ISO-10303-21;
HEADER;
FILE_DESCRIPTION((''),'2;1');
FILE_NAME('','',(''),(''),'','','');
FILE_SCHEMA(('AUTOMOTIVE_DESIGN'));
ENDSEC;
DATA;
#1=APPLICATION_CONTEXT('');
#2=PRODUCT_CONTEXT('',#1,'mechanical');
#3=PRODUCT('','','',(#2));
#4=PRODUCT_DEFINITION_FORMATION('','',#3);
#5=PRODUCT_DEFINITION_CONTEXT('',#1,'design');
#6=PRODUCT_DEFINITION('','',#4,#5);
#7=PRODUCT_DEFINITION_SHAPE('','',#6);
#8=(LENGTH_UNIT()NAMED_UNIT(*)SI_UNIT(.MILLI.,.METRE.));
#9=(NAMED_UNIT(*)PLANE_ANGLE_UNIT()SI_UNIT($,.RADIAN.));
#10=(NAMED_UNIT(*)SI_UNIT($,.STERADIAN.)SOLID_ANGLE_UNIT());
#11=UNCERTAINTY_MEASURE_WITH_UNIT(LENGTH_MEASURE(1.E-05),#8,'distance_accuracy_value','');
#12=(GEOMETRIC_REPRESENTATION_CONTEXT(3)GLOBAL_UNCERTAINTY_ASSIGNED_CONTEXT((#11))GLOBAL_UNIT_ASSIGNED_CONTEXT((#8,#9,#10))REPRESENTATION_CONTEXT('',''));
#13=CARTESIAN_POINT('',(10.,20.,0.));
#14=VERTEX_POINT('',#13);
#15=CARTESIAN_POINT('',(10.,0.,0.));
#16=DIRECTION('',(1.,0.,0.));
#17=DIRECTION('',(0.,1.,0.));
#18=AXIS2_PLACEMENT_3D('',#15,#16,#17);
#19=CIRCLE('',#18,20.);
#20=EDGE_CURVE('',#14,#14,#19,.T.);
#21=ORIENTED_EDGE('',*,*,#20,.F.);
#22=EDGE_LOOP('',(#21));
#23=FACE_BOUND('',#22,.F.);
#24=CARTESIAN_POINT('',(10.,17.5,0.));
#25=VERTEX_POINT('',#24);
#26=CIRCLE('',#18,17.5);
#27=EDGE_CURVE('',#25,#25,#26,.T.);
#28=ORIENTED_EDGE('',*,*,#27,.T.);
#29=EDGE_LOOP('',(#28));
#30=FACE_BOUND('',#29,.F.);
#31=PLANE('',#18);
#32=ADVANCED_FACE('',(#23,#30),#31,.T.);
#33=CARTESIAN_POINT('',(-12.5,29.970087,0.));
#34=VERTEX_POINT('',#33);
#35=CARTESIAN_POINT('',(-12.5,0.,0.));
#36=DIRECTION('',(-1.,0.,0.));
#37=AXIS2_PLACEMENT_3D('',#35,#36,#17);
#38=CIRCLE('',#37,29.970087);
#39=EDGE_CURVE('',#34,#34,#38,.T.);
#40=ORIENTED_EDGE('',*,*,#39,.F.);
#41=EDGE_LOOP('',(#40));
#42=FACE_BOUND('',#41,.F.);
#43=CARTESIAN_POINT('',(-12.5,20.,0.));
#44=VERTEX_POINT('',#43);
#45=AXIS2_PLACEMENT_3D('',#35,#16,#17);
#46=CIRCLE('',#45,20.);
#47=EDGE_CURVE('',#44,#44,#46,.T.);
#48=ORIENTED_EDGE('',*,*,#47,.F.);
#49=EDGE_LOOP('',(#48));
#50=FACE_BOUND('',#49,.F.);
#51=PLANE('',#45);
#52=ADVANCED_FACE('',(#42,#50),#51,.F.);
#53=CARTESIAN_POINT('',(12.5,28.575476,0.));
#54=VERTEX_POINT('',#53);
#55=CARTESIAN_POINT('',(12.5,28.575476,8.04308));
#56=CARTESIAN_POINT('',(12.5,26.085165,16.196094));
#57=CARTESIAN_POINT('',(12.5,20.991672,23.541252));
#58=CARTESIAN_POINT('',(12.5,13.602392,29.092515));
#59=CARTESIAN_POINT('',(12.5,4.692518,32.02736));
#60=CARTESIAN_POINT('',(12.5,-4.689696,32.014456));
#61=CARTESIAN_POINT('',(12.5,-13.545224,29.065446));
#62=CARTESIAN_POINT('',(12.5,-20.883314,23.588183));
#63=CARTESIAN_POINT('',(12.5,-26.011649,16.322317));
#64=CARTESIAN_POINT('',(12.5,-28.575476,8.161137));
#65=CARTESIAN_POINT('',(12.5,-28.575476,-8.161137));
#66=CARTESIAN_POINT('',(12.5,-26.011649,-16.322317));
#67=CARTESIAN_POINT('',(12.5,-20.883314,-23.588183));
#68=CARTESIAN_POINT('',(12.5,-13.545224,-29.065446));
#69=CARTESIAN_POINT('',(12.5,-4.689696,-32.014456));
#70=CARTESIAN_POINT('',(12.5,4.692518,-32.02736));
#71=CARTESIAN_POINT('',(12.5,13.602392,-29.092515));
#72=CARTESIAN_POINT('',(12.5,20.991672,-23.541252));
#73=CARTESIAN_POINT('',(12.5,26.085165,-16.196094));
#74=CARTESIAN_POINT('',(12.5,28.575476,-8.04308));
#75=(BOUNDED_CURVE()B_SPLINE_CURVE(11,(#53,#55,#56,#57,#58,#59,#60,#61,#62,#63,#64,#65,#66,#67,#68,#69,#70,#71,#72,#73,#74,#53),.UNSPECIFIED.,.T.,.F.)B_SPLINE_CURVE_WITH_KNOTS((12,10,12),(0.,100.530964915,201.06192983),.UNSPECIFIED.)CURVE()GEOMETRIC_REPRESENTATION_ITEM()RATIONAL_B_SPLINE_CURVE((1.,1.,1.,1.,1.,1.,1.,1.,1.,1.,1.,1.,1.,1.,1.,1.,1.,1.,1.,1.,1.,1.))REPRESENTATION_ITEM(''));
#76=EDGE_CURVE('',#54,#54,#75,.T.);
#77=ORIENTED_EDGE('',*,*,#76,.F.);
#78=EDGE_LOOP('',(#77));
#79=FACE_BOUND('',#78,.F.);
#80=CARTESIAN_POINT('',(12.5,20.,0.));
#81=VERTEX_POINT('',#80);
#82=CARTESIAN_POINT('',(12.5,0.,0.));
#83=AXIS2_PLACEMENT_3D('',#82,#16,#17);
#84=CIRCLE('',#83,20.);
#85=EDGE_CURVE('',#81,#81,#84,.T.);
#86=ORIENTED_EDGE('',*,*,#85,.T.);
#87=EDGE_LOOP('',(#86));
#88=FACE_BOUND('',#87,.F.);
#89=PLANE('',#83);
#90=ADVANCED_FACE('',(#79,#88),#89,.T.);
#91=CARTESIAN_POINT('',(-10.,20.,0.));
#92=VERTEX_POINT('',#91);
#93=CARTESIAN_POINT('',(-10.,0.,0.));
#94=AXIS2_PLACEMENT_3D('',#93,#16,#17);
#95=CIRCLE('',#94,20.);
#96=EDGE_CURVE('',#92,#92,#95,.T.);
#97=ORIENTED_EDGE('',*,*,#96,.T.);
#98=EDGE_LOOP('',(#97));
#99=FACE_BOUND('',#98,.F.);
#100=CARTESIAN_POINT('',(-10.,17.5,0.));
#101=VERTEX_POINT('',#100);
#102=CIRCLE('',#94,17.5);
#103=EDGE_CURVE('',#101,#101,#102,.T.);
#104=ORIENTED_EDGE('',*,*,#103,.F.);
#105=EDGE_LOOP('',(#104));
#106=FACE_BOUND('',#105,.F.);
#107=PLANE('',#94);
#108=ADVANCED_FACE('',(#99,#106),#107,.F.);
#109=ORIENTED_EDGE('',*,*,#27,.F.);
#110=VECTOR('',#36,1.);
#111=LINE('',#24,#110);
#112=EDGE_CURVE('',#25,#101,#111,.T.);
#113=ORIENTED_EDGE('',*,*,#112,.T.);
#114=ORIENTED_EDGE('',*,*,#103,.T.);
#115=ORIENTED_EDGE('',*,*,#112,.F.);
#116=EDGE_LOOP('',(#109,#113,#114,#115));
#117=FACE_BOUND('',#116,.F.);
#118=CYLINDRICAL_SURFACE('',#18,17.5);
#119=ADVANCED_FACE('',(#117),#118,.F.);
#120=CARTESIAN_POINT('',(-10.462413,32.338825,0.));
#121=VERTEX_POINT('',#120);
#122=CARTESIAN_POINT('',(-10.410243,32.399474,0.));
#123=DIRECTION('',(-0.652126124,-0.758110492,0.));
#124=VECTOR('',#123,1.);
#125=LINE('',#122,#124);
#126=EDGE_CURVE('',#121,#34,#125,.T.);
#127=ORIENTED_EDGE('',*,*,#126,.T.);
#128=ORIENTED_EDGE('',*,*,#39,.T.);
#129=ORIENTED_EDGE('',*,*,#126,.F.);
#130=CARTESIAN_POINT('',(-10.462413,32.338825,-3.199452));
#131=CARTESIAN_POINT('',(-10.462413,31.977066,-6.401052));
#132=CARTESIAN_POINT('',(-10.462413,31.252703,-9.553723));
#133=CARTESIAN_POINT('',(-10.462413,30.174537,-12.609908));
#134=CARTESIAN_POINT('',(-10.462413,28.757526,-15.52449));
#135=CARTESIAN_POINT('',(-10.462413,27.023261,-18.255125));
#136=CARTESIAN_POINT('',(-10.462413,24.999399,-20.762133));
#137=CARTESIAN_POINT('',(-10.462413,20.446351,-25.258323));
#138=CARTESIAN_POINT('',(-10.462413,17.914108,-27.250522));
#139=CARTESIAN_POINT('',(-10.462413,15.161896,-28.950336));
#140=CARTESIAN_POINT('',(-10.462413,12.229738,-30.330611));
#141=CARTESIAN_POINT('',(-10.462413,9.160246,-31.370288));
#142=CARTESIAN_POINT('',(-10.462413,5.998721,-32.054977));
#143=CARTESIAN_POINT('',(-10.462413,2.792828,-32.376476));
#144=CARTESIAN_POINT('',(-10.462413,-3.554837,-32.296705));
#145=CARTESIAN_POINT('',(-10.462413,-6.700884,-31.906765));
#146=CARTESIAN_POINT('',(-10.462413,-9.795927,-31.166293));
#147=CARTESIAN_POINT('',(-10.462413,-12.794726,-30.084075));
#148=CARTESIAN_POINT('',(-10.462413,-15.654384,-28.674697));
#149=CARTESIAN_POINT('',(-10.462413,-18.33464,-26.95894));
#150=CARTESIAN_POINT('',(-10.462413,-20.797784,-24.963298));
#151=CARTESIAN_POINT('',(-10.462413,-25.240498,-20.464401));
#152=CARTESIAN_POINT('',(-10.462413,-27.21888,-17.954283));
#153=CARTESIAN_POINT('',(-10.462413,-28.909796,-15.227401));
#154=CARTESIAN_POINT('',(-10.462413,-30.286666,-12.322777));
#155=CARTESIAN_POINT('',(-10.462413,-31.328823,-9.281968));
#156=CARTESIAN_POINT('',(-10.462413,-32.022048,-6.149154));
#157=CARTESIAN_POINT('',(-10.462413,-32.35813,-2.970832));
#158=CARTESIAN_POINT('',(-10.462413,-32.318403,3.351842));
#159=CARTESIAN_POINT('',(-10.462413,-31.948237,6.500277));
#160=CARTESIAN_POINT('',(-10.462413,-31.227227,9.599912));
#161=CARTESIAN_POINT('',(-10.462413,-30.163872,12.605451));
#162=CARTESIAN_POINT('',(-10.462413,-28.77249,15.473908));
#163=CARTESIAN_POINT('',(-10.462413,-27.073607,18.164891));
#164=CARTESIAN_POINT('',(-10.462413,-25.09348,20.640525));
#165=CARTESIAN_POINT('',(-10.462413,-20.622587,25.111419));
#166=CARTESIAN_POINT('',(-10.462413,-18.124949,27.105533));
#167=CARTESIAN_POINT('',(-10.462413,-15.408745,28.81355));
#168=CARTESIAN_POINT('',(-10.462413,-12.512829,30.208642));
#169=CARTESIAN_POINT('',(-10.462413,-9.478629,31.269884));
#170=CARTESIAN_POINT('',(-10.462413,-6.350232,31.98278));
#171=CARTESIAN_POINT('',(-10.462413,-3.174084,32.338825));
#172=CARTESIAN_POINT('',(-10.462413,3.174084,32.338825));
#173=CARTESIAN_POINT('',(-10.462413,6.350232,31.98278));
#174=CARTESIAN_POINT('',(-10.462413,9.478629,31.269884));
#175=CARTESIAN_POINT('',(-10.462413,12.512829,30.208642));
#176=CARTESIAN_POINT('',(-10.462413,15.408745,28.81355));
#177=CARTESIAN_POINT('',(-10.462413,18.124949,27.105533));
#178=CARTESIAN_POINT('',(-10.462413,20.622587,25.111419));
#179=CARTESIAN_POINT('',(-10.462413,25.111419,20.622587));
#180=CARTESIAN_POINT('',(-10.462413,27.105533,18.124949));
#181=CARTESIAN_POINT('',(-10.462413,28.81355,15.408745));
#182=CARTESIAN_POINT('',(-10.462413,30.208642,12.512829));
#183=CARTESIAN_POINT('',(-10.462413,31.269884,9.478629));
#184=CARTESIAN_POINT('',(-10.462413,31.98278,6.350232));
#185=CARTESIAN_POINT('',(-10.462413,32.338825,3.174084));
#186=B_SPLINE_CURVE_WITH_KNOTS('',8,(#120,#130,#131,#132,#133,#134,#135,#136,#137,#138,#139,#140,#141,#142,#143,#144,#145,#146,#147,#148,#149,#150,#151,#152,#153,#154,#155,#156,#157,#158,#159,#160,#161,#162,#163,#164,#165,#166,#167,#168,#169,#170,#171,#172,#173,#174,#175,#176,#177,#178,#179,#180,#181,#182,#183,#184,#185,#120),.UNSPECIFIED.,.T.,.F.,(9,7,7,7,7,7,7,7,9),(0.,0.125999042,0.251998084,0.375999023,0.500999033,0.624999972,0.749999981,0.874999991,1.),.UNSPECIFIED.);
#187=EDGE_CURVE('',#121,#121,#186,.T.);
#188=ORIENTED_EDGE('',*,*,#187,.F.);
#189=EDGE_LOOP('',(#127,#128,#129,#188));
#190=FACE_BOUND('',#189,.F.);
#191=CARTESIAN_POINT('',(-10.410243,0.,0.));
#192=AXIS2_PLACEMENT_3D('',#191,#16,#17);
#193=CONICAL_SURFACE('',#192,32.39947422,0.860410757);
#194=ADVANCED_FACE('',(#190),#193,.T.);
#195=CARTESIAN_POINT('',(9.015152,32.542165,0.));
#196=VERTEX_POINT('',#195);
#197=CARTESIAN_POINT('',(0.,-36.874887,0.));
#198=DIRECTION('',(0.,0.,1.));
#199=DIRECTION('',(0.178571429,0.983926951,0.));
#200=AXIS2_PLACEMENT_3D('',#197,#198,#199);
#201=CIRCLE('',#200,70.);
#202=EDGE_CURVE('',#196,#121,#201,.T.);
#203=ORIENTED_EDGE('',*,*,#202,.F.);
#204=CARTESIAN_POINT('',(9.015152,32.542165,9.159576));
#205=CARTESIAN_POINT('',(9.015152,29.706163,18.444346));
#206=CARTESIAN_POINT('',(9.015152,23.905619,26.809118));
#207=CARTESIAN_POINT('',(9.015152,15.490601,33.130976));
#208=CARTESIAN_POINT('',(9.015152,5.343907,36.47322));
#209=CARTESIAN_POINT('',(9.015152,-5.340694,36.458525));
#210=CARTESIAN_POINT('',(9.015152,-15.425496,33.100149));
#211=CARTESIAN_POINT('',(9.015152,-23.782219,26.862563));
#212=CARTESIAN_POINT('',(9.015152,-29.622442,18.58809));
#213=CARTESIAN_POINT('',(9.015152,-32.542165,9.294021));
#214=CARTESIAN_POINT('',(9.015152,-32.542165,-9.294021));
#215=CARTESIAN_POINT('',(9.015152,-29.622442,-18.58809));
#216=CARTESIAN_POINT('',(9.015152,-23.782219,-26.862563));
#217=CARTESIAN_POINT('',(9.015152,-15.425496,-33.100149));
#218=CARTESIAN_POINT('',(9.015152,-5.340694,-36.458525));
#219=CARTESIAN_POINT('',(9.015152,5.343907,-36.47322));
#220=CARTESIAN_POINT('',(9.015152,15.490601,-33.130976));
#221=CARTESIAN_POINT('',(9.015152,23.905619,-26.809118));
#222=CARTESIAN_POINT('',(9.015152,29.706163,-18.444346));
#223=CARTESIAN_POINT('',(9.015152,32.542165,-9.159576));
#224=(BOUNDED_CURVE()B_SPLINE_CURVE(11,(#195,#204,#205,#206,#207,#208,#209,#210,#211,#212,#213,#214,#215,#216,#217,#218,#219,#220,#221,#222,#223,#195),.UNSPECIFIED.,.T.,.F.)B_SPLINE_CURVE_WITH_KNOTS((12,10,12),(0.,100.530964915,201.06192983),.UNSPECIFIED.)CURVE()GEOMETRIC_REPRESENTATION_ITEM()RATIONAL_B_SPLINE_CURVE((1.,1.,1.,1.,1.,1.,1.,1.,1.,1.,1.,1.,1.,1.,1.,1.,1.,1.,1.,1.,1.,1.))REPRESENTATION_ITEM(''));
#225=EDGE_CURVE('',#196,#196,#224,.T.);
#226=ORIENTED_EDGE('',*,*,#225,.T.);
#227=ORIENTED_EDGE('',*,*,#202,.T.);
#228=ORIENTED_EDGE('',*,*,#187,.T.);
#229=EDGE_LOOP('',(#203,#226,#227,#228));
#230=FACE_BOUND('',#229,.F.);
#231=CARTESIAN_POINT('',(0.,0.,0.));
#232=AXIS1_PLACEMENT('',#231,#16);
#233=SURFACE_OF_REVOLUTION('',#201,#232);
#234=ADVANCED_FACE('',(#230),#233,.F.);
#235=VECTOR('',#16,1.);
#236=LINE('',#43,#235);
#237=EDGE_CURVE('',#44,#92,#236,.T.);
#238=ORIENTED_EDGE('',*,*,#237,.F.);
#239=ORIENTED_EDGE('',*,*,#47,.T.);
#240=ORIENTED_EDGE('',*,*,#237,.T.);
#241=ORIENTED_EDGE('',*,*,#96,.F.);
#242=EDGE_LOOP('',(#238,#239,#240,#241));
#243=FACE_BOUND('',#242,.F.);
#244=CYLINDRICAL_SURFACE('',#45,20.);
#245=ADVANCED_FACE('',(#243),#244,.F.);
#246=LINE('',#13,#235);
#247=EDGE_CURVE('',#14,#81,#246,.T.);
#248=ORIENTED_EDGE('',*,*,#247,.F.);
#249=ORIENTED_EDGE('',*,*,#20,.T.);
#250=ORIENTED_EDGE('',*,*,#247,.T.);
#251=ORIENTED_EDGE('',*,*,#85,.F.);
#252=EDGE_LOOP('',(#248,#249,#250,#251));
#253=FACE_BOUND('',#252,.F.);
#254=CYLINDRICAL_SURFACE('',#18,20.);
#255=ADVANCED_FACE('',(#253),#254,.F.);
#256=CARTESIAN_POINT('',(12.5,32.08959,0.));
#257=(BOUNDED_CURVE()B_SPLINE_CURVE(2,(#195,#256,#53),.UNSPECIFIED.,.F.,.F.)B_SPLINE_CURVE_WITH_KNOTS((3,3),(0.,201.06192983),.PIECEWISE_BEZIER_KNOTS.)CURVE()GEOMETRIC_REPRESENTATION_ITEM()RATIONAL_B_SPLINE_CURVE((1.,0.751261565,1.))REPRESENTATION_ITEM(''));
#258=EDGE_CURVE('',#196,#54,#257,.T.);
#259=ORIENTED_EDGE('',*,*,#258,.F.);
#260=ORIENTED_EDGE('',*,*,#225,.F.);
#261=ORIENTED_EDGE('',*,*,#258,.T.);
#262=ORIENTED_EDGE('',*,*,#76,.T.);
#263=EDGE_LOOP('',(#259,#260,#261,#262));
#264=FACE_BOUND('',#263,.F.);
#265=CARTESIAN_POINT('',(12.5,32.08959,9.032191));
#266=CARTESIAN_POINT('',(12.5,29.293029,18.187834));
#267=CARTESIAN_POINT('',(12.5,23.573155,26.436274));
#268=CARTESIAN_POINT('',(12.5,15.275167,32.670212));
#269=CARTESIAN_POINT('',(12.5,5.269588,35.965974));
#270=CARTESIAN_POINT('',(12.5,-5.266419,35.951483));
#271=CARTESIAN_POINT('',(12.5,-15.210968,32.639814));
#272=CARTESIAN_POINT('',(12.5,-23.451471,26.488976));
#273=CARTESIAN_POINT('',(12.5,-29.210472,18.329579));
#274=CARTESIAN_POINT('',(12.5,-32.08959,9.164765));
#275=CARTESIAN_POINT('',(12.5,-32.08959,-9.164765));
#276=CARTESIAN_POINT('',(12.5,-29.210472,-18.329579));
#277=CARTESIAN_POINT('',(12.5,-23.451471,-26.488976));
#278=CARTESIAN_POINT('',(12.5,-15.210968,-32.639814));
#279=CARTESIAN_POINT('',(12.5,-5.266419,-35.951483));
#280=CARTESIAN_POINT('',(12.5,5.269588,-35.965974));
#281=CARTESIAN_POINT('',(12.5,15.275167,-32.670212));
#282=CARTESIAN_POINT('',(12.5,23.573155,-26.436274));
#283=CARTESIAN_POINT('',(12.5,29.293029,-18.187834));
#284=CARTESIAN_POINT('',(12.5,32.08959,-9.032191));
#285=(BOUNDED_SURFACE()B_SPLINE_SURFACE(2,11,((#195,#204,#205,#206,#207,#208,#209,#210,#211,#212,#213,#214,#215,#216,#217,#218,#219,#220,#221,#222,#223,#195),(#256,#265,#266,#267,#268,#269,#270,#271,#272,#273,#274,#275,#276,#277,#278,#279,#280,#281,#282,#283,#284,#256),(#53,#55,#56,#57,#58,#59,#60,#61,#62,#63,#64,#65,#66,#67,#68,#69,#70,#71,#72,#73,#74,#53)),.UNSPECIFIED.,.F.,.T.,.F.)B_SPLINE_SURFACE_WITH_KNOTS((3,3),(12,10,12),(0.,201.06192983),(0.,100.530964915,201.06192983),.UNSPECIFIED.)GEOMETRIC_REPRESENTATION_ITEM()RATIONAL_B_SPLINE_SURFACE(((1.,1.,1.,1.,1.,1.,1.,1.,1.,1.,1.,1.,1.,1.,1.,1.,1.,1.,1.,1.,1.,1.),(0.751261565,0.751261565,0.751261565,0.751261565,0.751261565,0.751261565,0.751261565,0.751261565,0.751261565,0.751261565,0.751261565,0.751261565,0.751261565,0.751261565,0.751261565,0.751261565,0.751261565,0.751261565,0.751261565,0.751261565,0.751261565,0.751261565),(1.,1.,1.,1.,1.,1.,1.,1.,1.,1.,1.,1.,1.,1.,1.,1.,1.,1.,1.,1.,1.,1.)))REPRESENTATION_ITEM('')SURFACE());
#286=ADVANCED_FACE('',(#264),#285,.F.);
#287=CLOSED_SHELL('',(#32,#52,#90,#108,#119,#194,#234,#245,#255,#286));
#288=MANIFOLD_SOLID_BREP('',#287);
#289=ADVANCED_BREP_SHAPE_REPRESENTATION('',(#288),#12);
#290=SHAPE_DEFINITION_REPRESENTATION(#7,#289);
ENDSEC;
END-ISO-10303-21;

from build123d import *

# Parameters (mm, degrees)
F2_R     = 17.5
F3_DEPTH = 20
F4_R     = 4


# Not quite as in the source:
# - a fillet or chamfer that OpenCascade refuses, or shapes differently, is made with other operations: its cross-section is extruded or revolved along the edge and cut away or added


with BuildPart() as f1:
    # F0 (on Top) → F1 (revolve)
    with BuildSketch(Plane.XY):
        with BuildLine():
            Line((-10, 20), (-10, 0))
            Line((-10, 0), (10, 0))
            Line((10, 0), (10, 20))
            Line((10, 20), (12.5, 20))
            Line((12.5, 20), (12.5, 32))
            ThreePointArc((12.5, 32), (0, 33.1251134302), (-12.5, 32))
            Line((-12.5, 32), (-12.5, 20))
            Line((-12.5, 20), (-10, 20))
        make_face()
    revolve(axis=Axis((0, 0, 0), (1, 0, 0)))

    # F2 (on face) → F3 (cut, through all)
    with BuildSketch(Plane.YZ.offset(10)):
        Circle(F2_R)
    extrude(amount=-F3_DEPTH, mode=Mode.SUBTRACT)

    # F4
    f4_edges = [f1.edges().sort_by_distance(p)[0] for p in [
        (12.5, -32, 0),
    ]]
    fillet(f4_edges, radius=F4_R)

    # F5: chamfer of 2 on 1 edges, made by hand

    # F5_s1 → F5_t2 (revolve, cut)
    with BuildSketch(Plane.XY):
        with BuildLine():
            Line((-10.4102425429, 32.3994742196), (-12.5521700899, 29.9094378777))
            Line((-12.5521700899, 29.9094378777), (-12.5921700899, 29.9094378777))
            ThreePointArc((-12.5921700899, 29.9094378777), (-12.54, 30.9547189388), (-12.54, 32))
            Line((-12.54, 32), (-12.5071428571, 32.039357078))
            ThreePointArc((-12.5071428571, 32.039357078), (-11.4587168856, 32.2214187391), (-10.4162210644, 32.4390249122))
            Line((-10.4162210644, 32.4390249122), (-10.4102425429, 32.3994742196))
        make_face()
    revolve(axis=Axis((-12.5, 0, 0), (1, 0, 0)), mode=Mode.SUBTRACT)


solid = f1.part
